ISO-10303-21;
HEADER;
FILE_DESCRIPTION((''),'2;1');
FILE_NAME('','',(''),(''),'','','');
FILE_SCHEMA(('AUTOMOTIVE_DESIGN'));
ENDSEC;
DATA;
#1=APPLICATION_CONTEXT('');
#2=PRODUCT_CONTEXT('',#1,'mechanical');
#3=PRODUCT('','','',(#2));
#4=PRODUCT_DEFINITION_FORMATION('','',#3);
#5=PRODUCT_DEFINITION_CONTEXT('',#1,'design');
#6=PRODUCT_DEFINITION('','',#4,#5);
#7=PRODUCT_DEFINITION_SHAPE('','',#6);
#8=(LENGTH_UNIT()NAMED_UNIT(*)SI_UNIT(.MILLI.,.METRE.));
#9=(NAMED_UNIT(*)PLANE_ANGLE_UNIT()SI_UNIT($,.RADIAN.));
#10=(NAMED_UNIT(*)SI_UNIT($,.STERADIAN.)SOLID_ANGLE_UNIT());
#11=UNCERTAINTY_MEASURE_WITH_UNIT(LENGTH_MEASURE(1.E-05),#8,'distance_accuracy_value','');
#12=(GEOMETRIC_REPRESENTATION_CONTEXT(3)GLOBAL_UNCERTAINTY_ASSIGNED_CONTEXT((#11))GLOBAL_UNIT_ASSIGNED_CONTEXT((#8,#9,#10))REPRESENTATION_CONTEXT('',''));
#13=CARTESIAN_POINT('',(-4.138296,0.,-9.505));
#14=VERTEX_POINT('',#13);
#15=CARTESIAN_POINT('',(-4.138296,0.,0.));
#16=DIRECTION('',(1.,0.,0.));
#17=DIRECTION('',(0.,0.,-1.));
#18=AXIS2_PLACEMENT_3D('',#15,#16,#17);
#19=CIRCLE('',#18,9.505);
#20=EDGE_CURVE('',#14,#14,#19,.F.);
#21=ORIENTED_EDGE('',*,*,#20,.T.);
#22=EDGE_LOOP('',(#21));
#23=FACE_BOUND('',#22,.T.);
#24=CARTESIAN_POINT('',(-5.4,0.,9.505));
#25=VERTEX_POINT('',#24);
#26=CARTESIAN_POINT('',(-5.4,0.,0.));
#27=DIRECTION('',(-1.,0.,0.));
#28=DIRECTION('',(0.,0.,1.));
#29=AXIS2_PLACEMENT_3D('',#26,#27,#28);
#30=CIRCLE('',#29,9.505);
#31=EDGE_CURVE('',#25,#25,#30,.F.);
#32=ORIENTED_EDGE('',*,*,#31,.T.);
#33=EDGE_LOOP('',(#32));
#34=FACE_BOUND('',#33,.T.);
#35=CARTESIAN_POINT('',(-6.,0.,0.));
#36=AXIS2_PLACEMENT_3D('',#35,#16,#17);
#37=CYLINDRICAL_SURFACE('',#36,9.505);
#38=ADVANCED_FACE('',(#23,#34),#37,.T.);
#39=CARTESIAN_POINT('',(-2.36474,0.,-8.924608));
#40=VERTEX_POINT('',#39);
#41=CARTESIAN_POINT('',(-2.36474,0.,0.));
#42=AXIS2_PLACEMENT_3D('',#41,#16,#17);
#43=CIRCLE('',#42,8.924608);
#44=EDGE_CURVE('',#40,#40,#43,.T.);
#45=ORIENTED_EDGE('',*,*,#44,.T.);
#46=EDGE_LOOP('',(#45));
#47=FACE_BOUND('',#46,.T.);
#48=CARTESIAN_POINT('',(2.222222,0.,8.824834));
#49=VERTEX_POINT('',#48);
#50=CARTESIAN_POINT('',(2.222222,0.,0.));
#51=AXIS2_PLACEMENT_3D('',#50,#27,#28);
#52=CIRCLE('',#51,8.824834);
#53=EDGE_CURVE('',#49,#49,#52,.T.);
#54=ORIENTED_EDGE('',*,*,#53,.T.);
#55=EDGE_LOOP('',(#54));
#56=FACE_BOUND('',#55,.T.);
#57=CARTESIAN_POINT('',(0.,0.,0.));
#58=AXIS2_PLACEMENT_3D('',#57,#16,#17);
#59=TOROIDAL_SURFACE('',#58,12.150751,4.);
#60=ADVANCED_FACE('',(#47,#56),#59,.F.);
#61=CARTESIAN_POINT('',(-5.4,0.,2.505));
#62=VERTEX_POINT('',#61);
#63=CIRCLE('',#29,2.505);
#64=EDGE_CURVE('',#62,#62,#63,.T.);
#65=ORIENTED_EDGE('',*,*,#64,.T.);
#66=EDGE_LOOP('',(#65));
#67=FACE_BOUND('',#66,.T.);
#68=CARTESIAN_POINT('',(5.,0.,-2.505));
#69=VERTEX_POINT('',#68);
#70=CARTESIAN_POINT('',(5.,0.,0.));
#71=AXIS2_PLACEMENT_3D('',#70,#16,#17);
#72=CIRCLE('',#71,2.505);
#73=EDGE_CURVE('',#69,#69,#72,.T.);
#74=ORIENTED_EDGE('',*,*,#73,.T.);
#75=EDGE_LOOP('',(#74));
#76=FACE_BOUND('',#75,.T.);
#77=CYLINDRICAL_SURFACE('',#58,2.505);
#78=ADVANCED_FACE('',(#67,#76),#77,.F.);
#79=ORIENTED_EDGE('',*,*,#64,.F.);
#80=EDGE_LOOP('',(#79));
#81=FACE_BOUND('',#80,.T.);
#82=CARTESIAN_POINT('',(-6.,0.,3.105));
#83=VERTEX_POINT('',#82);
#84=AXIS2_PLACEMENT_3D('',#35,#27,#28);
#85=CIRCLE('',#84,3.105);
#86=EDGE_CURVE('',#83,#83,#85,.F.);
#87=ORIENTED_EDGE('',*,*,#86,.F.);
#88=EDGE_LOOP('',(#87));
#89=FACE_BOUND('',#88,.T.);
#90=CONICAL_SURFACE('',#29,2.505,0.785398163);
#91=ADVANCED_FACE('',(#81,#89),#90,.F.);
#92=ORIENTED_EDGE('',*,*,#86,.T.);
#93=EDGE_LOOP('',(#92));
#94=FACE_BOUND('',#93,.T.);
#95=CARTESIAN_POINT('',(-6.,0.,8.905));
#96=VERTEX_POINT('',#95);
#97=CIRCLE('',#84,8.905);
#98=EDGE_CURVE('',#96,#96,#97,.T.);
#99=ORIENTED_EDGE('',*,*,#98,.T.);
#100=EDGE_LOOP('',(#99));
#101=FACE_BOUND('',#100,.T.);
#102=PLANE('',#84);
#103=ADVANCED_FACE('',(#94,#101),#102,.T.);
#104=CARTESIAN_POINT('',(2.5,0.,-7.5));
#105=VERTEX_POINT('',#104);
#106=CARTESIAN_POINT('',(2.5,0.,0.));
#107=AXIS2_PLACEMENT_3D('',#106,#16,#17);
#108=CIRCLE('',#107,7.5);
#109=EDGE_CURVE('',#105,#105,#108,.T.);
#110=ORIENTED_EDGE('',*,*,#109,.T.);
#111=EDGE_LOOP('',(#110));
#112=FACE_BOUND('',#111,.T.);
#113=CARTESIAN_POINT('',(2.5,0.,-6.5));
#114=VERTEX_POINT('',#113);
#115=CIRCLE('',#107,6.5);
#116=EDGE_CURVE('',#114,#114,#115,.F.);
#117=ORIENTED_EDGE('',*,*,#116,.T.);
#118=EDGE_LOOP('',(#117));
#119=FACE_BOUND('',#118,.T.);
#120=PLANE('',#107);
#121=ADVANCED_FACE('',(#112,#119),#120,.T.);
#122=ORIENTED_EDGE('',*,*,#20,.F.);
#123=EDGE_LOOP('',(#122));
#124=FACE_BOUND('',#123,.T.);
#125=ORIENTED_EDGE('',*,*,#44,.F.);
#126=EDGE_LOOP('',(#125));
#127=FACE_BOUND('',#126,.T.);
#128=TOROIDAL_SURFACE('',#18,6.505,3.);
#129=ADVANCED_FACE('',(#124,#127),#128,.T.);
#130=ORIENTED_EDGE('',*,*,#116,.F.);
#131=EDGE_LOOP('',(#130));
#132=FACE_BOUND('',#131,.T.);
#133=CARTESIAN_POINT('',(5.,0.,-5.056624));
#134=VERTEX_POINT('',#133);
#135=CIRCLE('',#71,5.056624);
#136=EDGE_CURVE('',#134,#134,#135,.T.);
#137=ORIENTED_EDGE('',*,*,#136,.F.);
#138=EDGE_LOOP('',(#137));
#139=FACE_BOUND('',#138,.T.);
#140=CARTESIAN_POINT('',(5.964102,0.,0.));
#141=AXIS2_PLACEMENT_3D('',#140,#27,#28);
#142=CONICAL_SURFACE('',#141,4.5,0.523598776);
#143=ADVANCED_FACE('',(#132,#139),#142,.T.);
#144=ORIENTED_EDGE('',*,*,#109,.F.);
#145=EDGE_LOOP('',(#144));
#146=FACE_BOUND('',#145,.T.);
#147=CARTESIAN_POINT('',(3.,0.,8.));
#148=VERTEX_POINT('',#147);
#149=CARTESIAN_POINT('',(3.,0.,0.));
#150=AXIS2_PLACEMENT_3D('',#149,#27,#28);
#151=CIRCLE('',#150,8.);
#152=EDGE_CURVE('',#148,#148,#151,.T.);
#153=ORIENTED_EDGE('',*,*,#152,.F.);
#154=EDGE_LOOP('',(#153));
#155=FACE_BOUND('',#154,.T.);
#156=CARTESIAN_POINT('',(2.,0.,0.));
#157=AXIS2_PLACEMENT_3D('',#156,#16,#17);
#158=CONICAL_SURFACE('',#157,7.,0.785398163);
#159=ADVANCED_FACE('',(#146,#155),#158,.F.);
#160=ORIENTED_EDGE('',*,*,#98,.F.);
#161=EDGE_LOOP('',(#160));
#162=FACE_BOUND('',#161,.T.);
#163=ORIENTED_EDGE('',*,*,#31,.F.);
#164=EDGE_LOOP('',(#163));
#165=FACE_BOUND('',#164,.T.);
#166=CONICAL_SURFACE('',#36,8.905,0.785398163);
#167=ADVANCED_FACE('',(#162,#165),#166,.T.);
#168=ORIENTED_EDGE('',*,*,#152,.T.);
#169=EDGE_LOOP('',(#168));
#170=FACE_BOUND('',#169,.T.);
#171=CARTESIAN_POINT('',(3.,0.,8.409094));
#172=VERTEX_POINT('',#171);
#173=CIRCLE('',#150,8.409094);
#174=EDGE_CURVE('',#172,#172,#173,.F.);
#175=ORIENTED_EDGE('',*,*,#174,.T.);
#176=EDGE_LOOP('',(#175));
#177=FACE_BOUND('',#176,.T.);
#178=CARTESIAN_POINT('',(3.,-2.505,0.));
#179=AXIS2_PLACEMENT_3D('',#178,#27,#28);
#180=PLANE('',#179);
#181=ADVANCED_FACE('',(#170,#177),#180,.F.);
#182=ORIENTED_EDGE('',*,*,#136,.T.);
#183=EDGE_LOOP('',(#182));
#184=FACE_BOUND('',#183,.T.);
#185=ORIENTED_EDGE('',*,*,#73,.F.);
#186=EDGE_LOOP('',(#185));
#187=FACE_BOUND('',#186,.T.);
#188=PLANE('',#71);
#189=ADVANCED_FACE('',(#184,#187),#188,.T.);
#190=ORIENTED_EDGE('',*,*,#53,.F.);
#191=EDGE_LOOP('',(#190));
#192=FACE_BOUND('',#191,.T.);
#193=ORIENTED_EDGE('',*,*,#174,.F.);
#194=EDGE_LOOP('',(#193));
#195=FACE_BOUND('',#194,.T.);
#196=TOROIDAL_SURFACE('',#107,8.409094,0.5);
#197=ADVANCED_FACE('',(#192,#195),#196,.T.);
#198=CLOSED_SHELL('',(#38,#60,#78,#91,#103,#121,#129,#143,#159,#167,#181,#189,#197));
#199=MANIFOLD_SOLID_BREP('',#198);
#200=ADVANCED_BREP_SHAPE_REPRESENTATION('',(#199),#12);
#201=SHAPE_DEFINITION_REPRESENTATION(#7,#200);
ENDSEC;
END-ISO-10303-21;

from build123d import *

# Parameters (mm, degrees)
SKETCH2_R           = 7
SKETCH2_R_2         = 4.5
CUT_EXTRUDE1_DEPTH  = 0.5
CHAMFER3_SIZE       = 1
BOSS_EXTRUDE1_START = 2
SKETCH3_R           = 4.5
SKETCH3_R_2         = 2.505
BOSS_EXTRUDE1_DEPTH = 2
CHAMFER4_SIZE       = 2
CHAMFER4_SIZE_2     = 3.464101615
SKETCH4_R           = 9.505
SKETCH4_R_2         = 2.505
BOSS_EXTRUDE2_DEPTH = 3
FILLET1_R           = 0.5
FILLET2_R           = 3
CHAMFER5_SIZE       = 0.6


with BuildPart() as part:
    # Sketch1 → Revolve1 (revolve)
    with BuildSketch(Plane.XY, mode=Mode.PRIVATE) as revolve1_sk:
        with BuildLine():
            Line((-3, -9.505), (-3, -2.505))
            Line((-3, -2.505), (3, -2.505))
            Line((3, -2.505), (3, -9.505))
            ThreePointArc((3, -9.505), (0, -8.150751311), (-3, -9.505))
        make_face()
    revolve(revolve1_sk.sketch.rotate(Axis((0, 0, 0), (-1, 0, 0)), 270), axis=Axis((0, 0, 0), (-1, 0, 0)))

    # Sketch2 → Cut-Extrude1 (cut)
    with BuildSketch(Plane(origin=(3, 0, 0), x_dir=(0, 0, -1), z_dir=(1, 0, 0))):
        Circle(SKETCH2_R)
        Circle(SKETCH2_R_2, mode=Mode.SUBTRACT)
    extrude(amount=-CUT_EXTRUDE1_DEPTH, mode=Mode.SUBTRACT)

    # Chamfer3
    # the kernel refuses this chamfer: 1 mm, written as the material it takes off along each edge
    with BuildSketch(Plane(origin=(3, 0, 0), x_dir=(0, 0, -1), z_dir=(0, -1, 0))) as chamfer3_piece_1_section:
        Polygon((7 + CHAMFER3_SIZE, 0), (7, -CHAMFER3_SIZE), (7, 0), align=None)
    chamfer3_piece_1 = revolve(axis=Axis((3, 0, 0), (1, 0, 0)), mode=Mode.PRIVATE)
    chamfer3_piece_1 = split(chamfer3_piece_1, bisect_by=Plane(origin=(2.5, 0, 7.745273701), z_dir=(1, 0, 0)), keep=Keep.TOP, mode=Mode.PRIVATE)
    add(chamfer3_piece_1, mode=Mode.SUBTRACT)

    # Sketch3 → Boss-Extrude1 (add)
    with BuildSketch(Plane(origin=(3, 0, 0), x_dir=(0, 0, -1), z_dir=(1, 0, 0)).offset(BOSS_EXTRUDE1_START)):
        Circle(SKETCH3_R)
        Circle(SKETCH3_R_2, mode=Mode.SUBTRACT)
    extrude(amount=-BOSS_EXTRUDE1_DEPTH)

    # Chamfer4
    # the kernel refuses this chamfer: 3.464101615, 2 mm, written as the material it adds along each edge
    with BuildSketch(Plane(origin=(2.5, 0, 0), x_dir=(0, 0, -1), z_dir=(0, -1, 0))) as chamfer4_piece_1_section:
        Polygon((4.5 + CHAMFER4_SIZE, 0), (4.5, CHAMFER4_SIZE_2), (4.5, 0), align=None)
    chamfer4_piece_1 = revolve(axis=Axis((2.5, 0, 0), (1, 0, 0)), mode=Mode.PRIVATE)
    chamfer4_piece_1 = split(chamfer4_piece_1, bisect_by=Plane(origin=(5, 0, 5.770731059), z_dir=(-1, 0, 0)), keep=Keep.TOP, mode=Mode.PRIVATE)
    add(chamfer4_piece_1)

    # Sketch4 → Boss-Extrude2 (add)
    with BuildSketch(Plane.ZY.offset(3)):
        Circle(SKETCH4_R)
        with Locations(Location((0, 0, 0), (0, 0, 180))):
            Circle(SKETCH4_R_2, mode=Mode.SUBTRACT)
    extrude(amount=BOSS_EXTRUDE2_DEPTH)

    # Fillet1
    fillet1_edges = [part.edges().sort_by_distance(p)[0] for p in [
        (3, 0, 9.505),
    ]]
    fillet(fillet1_edges, radius=FILLET1_R)

    # Fillet2
    fillet2_edges = [part.edges().sort_by_distance(p)[0] for p in [
        (-3, -9.505, 0),
    ]]
    fillet(fillet2_edges, radius=FILLET2_R)

    # Chamfer5
    chamfer5_edges = [part.edges().sort_by_distance(p)[0] for p in [
        (-6, 0, -9.505),
        (-6, 0, 2.505),
    ]]
    chamfer(chamfer5_edges, length=CHAMFER5_SIZE)


solid = part.part
